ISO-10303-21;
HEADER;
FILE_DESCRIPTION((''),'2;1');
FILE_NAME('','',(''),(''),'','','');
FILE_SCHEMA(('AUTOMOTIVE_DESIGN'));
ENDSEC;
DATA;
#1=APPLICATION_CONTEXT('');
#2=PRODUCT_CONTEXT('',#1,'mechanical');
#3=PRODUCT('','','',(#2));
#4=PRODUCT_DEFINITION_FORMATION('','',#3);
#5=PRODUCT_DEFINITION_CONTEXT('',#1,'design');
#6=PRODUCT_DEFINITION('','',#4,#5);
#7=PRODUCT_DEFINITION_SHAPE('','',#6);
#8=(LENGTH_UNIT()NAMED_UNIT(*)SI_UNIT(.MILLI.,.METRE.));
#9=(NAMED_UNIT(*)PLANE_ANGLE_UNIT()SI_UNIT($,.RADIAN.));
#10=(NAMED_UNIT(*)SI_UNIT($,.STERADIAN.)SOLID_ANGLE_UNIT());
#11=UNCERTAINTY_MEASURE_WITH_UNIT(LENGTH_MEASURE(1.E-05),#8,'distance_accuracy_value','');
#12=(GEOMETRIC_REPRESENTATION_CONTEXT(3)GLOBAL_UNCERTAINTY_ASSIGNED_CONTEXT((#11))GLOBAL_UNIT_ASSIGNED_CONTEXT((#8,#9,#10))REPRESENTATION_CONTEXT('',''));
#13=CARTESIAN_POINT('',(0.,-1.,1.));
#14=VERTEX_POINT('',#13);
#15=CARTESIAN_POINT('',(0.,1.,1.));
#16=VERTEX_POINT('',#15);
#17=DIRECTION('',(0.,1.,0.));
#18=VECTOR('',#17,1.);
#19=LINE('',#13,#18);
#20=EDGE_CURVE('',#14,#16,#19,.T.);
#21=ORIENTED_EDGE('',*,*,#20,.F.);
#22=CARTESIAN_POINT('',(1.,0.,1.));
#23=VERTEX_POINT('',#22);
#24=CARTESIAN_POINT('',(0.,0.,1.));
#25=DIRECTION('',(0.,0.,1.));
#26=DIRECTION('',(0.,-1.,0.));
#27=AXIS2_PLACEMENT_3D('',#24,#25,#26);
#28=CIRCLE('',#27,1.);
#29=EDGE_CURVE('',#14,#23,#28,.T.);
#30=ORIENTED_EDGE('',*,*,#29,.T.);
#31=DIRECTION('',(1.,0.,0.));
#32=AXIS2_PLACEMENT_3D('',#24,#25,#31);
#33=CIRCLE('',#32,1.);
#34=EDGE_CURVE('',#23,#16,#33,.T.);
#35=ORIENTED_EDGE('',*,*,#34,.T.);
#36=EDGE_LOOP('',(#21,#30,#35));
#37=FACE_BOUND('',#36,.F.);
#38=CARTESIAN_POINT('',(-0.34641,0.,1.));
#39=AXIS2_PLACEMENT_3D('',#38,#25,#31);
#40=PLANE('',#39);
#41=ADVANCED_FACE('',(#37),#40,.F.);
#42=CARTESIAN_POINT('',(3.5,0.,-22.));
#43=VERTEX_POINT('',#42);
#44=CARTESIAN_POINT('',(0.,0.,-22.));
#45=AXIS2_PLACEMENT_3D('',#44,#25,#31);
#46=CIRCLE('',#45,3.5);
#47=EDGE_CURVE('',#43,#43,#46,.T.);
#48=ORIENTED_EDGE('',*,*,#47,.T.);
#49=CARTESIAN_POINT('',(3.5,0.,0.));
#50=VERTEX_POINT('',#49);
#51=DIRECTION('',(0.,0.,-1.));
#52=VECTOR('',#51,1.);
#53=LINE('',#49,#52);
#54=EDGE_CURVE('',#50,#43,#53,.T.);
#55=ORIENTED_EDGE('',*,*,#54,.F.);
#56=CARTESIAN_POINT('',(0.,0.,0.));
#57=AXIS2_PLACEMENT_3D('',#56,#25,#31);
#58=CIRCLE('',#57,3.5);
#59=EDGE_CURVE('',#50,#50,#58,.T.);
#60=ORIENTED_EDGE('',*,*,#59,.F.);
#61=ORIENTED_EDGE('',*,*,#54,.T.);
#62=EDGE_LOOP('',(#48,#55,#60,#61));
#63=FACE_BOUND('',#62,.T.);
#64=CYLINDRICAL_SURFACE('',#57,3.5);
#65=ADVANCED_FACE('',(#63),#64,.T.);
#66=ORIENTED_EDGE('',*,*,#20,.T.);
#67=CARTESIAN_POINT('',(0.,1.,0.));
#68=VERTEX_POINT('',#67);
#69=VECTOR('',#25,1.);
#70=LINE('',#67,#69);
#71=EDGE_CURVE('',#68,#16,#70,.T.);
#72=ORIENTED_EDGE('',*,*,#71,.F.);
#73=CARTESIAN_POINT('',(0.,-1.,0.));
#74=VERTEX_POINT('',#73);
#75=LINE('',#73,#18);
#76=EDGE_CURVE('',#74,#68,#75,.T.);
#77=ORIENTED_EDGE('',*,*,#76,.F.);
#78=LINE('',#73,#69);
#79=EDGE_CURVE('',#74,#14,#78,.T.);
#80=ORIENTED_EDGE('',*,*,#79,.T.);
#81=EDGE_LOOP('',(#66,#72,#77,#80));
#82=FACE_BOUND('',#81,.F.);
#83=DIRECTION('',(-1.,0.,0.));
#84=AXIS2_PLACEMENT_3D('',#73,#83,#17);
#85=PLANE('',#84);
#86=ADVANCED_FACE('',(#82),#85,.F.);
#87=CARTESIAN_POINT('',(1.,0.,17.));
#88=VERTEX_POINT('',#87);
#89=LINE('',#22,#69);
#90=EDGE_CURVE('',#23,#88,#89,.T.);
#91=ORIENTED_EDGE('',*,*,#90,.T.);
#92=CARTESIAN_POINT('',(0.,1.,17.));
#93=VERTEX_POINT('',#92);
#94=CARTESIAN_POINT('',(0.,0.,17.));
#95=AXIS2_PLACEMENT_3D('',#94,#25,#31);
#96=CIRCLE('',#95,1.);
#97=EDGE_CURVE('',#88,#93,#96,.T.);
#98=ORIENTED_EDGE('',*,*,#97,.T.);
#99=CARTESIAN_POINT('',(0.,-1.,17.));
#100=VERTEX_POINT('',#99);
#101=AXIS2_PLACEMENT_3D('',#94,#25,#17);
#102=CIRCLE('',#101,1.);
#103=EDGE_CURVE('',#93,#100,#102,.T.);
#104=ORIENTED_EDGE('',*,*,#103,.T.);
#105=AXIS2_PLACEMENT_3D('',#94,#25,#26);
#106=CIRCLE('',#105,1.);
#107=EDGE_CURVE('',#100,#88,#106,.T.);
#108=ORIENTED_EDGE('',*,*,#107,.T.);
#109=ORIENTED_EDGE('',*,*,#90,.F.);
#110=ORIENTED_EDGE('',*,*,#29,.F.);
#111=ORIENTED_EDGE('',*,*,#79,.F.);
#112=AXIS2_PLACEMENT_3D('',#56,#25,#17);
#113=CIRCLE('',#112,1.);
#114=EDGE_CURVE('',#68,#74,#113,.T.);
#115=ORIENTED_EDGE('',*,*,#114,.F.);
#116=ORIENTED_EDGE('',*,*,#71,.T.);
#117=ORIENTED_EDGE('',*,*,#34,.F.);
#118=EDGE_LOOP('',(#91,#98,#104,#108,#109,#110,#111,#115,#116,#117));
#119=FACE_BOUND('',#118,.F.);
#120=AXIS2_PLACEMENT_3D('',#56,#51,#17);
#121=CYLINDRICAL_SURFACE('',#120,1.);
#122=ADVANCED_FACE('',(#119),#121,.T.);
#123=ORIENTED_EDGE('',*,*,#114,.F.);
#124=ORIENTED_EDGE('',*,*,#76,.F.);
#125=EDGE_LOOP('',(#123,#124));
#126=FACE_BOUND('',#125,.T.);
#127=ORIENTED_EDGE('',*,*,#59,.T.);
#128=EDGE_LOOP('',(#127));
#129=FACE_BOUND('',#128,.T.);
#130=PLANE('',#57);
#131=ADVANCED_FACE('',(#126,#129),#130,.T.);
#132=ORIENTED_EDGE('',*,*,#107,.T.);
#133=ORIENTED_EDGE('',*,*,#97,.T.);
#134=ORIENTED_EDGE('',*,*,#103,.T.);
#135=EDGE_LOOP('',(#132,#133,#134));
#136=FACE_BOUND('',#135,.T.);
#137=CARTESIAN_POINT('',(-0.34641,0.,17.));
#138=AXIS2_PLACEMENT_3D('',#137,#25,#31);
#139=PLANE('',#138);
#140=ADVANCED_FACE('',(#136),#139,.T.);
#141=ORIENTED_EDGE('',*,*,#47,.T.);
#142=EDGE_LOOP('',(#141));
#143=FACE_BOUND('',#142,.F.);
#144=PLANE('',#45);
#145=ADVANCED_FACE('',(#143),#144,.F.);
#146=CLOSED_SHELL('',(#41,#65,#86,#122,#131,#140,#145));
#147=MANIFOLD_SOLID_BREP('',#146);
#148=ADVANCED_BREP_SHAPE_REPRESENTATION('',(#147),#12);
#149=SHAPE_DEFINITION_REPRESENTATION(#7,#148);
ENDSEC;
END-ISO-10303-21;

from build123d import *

# Parameters (mm, degrees)
F0_R     = 3.5
F1_DEPTH = 22
F2_START = 1
F2_DEPTH = 16
F3_DEPTH = 1


# Not quite as in the source:
# - a feature names something its author has since deleted; it is built from what else it names


with BuildPart() as f1:
    # F0 (on Top) → F1 (new body)
    with BuildSketch(Plane.XY):
        Circle(F0_R)
        with BuildLine():
            ThreePointArc((0, 1), (0.7071067812, 0.7071067812), (1, 0))
            ThreePointArc((1, 0), (0.7071067812, -0.7071067812), (0, -1))
            ThreePointArc((0, -1), (-1, 0), (0, 1))
        make_face(mode=Mode.SUBTRACT)
        with BuildLine():
            Line((0, 0), (0, 1))
            ThreePointArc((0, 1), (-1, 0), (0, -1))
            Line((0, -1), (0, 0))
        make_face()
        with BuildLine():
            ThreePointArc((0, -1), (0.7071067812, -0.7071067812), (1, 0))
            ThreePointArc((1, 0), (0.7071067812, 0.7071067812), (0, 1))
            Line((0, 1), (0, 0))
            Line((0, 0), (0, -1))
        make_face()
    extrude(amount=-F1_DEPTH)



with BuildPart() as f2:
    # F0 (on Top) → F2 (new body)
    with BuildSketch(Plane.XY.offset(F2_START)):
        with BuildLine():
            Line((0, 0), (0, 1))
            ThreePointArc((0, 1), (-1, 0), (0, -1))
            Line((0, -1), (0, 0))
        make_face()
        with BuildLine():
            ThreePointArc((0, -1), (0.7071067812, -0.7071067812), (1, 0))
            ThreePointArc((1, 0), (0.7071067812, 0.7071067812), (0, 1))
            Line((0, 1), (0, 0))
            Line((0, 0), (0, -1))
        make_face()
    extrude(amount=F2_DEPTH)


with BuildPart() as f1_1:
    add(f1.part)

    add(f2.part)  # F3 merges F2
    # F0 (on Top) → F3 (join)
    with BuildSketch(Plane.XY):
        with BuildLine():
            Line((0, 0), (0, 1))
            ThreePointArc((0, 1), (-1, 0), (0, -1))
            Line((0, -1), (0, 0))
        make_face()
    extrude(amount=F3_DEPTH)


solid = f1_1.part
